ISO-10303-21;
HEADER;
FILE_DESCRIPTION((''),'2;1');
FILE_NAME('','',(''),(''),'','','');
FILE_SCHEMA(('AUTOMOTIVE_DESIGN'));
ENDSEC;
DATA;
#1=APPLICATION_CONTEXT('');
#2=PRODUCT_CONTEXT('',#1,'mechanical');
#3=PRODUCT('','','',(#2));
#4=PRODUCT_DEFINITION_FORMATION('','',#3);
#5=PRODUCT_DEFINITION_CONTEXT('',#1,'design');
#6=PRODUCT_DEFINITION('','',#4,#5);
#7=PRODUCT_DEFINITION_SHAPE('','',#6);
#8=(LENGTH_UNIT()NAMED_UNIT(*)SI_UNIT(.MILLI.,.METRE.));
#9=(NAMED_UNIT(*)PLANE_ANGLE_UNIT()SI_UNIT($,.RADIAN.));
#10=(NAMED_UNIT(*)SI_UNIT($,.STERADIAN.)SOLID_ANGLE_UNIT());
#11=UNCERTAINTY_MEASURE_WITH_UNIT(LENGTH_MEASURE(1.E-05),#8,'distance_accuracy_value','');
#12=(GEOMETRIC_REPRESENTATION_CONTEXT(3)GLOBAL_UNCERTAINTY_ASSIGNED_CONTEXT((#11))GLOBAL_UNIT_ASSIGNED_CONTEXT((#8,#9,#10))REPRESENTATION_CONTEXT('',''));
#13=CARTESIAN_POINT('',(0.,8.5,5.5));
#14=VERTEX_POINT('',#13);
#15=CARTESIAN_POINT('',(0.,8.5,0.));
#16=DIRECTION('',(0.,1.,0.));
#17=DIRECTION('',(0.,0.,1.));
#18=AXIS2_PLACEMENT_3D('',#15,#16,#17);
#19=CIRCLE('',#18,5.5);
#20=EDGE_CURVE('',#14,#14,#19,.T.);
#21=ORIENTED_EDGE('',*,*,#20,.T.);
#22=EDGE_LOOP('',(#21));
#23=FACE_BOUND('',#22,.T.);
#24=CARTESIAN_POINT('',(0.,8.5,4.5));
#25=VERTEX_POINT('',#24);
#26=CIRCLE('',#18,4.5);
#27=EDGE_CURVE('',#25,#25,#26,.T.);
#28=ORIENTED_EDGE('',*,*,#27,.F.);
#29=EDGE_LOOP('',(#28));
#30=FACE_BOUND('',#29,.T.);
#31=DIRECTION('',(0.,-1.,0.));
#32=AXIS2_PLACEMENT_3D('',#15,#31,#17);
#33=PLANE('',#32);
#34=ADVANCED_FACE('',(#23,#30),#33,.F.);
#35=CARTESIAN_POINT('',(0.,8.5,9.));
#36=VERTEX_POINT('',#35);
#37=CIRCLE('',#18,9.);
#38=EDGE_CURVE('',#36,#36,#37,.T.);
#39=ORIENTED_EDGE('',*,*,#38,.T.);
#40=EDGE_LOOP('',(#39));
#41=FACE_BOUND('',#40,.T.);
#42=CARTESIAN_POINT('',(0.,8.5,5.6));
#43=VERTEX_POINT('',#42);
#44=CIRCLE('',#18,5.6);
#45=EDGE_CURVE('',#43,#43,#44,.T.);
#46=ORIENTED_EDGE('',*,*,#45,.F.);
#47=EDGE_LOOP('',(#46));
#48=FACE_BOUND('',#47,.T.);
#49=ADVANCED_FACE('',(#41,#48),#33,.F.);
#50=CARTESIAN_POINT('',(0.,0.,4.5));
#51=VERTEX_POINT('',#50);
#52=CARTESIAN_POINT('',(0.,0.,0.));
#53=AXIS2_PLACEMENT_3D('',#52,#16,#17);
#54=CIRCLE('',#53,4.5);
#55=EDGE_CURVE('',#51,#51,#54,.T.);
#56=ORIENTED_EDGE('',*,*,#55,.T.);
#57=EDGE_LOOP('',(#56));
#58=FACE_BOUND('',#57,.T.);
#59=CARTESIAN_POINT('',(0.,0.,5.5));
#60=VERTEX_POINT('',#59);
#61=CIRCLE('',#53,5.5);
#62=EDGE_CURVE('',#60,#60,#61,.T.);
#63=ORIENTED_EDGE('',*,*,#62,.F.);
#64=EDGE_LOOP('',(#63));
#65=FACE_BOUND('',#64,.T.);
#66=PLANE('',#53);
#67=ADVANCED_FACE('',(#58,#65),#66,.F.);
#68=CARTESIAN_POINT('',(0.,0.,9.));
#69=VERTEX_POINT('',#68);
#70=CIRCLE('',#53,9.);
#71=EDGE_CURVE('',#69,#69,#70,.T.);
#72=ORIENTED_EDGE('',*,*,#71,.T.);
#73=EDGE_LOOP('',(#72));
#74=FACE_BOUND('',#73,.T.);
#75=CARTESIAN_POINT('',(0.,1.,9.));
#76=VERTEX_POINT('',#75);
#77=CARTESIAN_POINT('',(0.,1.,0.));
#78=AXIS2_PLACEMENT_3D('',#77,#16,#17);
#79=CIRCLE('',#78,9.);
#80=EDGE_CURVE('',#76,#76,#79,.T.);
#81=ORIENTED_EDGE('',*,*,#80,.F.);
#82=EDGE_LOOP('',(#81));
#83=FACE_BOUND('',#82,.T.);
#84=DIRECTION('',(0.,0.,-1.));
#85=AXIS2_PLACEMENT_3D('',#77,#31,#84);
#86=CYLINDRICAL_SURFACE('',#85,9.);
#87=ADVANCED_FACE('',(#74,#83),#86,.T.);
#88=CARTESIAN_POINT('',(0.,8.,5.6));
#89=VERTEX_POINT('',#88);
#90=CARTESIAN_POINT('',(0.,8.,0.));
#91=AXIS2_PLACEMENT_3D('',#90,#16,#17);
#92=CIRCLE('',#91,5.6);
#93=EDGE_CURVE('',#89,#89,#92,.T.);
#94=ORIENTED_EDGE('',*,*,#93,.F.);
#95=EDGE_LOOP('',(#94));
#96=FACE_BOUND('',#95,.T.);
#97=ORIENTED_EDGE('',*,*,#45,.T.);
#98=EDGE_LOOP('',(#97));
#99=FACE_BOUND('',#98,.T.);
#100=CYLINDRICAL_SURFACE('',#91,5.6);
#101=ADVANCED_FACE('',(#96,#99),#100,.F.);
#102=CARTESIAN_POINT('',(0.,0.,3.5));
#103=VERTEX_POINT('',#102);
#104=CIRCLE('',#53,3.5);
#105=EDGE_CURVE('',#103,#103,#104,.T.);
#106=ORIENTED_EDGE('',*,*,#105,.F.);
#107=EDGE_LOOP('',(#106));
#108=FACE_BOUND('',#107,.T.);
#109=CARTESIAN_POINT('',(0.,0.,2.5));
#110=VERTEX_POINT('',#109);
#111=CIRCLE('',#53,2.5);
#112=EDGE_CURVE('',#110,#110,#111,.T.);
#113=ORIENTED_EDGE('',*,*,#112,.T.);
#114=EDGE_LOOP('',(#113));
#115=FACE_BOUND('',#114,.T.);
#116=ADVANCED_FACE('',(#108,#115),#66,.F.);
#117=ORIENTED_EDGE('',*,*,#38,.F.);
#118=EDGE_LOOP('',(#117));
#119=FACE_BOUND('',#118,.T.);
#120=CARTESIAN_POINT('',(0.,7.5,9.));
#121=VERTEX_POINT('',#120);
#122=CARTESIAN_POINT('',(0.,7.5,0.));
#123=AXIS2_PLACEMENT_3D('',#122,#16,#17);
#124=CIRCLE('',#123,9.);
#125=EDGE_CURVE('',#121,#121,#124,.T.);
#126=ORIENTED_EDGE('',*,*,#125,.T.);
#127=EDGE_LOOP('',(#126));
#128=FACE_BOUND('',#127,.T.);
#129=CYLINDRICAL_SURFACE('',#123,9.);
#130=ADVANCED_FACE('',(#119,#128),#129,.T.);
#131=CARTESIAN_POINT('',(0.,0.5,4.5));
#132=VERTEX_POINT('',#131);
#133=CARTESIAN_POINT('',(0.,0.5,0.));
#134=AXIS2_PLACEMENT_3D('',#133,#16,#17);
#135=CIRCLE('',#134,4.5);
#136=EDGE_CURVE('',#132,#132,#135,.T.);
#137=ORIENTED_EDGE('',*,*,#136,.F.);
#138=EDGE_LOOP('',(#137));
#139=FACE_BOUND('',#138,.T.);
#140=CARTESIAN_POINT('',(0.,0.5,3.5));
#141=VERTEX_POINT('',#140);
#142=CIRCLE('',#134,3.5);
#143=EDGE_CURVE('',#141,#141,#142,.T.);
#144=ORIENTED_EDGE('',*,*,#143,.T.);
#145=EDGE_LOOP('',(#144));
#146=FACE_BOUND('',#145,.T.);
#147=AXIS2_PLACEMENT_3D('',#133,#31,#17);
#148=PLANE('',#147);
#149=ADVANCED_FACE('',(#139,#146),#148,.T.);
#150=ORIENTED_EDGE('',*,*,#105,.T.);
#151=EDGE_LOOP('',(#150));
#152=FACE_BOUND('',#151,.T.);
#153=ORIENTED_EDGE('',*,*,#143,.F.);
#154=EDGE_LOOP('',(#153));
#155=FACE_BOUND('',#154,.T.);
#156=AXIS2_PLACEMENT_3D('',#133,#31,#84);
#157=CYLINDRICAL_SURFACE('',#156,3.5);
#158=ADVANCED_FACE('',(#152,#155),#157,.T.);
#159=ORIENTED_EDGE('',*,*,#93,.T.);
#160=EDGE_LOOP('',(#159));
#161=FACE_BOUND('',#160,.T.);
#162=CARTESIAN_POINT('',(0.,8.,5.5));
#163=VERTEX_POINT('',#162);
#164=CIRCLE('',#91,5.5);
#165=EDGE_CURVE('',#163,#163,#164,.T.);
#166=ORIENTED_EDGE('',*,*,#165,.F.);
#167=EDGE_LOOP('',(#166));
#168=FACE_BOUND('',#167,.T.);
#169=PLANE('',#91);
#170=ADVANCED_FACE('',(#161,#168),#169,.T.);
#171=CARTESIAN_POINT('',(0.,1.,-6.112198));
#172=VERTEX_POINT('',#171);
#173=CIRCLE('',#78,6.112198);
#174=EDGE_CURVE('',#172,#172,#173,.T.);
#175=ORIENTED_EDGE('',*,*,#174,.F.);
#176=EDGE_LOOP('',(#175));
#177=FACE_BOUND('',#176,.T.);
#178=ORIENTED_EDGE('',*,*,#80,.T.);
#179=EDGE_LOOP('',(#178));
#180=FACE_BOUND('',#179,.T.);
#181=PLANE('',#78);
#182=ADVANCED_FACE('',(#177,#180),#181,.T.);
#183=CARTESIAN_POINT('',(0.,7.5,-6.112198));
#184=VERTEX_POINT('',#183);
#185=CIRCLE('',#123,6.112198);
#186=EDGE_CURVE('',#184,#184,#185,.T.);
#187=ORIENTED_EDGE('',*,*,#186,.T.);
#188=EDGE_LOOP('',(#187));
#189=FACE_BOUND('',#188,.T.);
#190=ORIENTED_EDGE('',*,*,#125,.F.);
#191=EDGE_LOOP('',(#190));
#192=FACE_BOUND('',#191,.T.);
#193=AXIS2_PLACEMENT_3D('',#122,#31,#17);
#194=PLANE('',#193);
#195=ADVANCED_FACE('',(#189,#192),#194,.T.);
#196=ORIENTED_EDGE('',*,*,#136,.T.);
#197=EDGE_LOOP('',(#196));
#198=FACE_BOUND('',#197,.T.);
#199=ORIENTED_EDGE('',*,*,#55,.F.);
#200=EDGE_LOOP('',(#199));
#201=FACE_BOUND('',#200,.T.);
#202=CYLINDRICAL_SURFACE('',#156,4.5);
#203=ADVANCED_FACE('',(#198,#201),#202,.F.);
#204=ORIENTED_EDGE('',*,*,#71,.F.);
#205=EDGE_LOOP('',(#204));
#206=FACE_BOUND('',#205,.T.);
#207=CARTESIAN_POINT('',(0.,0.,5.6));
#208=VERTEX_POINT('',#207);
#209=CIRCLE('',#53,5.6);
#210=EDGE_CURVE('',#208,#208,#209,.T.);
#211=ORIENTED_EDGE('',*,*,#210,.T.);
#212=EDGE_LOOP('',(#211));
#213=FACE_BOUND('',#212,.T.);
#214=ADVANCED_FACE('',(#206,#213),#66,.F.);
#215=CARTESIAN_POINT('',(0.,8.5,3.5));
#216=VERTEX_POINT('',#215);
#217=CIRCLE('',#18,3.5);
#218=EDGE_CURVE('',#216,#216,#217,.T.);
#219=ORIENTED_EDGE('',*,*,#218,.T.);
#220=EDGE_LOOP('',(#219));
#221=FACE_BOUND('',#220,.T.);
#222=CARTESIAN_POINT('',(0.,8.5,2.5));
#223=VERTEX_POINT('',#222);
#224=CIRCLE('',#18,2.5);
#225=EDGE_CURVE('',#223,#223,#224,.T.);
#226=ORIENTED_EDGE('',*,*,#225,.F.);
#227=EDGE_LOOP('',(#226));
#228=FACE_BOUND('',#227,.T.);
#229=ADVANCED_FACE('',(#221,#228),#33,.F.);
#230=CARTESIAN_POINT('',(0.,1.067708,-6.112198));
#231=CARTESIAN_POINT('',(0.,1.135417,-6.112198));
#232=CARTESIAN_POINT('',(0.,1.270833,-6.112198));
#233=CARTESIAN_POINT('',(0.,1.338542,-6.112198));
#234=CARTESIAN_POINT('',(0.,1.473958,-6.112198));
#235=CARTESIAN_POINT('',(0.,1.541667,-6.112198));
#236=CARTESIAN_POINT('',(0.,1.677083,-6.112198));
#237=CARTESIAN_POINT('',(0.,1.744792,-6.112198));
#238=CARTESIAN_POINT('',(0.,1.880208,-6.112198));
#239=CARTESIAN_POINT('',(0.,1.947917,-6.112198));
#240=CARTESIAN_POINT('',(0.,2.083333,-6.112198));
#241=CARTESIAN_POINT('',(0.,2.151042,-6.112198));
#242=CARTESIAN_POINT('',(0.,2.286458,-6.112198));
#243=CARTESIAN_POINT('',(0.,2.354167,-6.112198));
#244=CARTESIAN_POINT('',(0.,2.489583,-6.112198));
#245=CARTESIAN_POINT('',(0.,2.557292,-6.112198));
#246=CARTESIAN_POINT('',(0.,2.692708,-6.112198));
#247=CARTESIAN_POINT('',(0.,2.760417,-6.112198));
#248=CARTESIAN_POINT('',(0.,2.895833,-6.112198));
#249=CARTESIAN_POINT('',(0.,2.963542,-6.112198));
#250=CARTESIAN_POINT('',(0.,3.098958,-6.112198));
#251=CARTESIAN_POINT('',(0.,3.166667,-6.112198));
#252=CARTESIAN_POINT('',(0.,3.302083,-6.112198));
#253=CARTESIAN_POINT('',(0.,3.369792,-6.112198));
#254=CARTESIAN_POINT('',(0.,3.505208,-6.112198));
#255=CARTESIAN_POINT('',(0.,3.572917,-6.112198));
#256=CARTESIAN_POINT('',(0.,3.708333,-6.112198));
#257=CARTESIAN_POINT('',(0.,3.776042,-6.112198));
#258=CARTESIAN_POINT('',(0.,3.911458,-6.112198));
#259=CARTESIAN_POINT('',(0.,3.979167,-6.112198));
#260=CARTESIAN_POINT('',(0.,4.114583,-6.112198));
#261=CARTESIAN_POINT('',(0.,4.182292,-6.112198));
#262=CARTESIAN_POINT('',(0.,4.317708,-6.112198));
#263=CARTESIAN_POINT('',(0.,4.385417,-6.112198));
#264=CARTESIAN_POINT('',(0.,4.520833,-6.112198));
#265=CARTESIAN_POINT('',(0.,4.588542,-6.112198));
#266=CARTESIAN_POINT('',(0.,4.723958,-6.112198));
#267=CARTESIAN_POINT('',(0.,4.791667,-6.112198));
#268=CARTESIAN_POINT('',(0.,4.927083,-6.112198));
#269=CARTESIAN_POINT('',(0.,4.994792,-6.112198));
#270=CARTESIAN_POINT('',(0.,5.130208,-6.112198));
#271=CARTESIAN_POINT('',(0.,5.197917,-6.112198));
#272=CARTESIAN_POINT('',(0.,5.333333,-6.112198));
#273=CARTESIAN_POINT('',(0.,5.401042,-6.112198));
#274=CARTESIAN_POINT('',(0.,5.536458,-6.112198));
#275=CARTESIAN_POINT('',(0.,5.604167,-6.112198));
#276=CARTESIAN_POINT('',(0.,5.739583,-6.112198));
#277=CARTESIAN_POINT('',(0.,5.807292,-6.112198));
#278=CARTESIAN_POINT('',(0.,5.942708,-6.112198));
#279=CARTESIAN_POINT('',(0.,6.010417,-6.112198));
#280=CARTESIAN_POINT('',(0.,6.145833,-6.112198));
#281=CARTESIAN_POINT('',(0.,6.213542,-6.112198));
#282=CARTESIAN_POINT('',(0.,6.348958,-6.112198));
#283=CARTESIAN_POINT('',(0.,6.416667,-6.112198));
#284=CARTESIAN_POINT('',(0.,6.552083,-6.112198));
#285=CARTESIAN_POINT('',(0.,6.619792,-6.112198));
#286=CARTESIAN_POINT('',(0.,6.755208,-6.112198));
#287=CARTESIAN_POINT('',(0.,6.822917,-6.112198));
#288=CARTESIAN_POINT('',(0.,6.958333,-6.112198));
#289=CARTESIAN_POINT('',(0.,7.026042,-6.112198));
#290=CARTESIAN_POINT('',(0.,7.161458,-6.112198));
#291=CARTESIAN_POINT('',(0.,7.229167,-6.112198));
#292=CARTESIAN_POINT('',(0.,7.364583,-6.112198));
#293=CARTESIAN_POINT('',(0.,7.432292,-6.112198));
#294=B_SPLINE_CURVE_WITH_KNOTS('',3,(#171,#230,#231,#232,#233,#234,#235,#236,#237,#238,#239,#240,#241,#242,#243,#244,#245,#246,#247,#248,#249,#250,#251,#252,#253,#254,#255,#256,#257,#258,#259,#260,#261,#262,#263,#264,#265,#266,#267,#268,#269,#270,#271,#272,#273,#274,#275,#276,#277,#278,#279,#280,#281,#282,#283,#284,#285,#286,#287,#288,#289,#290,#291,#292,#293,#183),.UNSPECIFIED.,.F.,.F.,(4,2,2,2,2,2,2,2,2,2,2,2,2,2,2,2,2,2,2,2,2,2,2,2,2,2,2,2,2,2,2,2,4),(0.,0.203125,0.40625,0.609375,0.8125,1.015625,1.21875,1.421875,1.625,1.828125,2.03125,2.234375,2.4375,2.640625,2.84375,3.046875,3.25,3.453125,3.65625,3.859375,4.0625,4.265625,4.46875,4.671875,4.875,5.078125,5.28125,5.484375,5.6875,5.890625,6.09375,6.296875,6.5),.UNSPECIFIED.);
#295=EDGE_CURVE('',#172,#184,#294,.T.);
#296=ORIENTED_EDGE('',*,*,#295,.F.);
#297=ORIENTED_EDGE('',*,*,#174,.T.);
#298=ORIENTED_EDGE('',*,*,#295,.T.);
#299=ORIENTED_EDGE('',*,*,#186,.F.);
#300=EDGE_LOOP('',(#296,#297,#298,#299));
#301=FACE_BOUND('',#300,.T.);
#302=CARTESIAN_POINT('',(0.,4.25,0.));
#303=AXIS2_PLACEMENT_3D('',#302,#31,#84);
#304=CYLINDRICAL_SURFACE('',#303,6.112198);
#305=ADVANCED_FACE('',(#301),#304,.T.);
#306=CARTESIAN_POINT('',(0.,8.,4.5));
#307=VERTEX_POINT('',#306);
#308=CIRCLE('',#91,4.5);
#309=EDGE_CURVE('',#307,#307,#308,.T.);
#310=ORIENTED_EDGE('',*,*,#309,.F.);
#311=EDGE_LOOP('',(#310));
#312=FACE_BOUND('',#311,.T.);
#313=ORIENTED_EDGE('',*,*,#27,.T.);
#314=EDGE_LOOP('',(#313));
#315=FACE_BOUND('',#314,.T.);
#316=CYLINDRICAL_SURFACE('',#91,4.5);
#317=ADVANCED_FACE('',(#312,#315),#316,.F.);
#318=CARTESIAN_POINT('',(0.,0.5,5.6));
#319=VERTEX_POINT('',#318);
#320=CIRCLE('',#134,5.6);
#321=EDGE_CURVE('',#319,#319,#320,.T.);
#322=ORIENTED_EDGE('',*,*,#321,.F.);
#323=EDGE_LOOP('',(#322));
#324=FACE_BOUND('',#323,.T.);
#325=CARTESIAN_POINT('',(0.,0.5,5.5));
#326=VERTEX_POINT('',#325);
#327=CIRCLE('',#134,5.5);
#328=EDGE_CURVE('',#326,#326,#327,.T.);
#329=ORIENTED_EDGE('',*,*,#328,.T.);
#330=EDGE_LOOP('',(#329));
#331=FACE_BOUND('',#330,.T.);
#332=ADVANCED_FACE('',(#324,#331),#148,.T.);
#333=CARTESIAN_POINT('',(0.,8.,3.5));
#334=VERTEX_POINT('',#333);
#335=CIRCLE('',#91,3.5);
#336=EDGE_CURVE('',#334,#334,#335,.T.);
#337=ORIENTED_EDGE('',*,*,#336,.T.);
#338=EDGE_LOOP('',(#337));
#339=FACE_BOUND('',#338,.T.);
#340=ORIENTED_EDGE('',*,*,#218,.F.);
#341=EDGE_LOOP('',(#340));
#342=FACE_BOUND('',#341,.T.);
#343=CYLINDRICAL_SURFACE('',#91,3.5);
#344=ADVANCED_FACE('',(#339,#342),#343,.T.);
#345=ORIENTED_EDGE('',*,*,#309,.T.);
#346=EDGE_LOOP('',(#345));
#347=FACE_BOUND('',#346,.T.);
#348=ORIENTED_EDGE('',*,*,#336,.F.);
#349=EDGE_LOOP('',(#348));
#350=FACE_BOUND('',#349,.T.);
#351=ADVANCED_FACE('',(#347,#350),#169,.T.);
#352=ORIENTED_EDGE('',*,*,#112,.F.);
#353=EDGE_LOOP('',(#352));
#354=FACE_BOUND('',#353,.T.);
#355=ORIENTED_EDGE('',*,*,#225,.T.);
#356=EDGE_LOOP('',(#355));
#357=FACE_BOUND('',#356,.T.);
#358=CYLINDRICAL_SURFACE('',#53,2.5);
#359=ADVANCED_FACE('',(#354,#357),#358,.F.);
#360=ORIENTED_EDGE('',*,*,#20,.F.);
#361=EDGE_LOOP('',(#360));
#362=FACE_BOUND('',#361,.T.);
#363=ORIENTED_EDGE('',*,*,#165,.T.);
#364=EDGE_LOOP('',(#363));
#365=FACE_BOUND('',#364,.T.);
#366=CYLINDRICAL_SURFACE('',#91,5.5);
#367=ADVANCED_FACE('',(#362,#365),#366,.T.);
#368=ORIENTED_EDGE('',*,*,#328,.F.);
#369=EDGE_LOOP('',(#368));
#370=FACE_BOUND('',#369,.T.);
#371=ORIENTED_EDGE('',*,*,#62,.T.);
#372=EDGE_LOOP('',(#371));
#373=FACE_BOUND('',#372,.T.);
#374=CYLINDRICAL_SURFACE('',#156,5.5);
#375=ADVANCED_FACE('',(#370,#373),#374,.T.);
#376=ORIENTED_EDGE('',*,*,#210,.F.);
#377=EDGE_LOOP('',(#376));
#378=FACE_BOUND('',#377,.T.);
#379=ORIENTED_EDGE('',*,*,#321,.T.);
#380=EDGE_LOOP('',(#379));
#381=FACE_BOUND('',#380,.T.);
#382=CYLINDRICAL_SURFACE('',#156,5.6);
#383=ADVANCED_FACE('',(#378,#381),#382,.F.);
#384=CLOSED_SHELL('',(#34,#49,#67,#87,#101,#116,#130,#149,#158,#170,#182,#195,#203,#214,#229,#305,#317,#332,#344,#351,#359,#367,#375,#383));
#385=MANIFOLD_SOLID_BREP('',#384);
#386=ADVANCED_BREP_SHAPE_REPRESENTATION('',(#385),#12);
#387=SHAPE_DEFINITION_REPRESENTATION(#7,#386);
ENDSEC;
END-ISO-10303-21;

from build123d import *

# Parameters (mm, degrees)
BOSS_EXTRUDE1_OUTLINE_R = 9
BOSS_EXTRUDE1_DEPTH     = 1
SKETCH2_R               = 6.1121977
BOSS_EXTRUDE2_DEPTH     = 3.25
SKETCH3_R               = 2.5
CUT_EXTRUDE1_DEPTH      = 16.305227865
SKETCH4_R               = 5.6
SKETCH4_R_2             = 5.5
SKETCH4_R_3             = 4.5
SKETCH4_R_4             = 3.5
CUT_EXTRUDE2_DEPTH      = 0.5


# Read off the part's stored shape, not the designer's step: Boss-Extrude1
with BuildPart() as part:
    # Boss-Extrude1 outline → Boss-Extrude1 (new body)
    with BuildSketch(Plane(origin=(0, 0, 0), x_dir=(1, 0, 0), z_dir=(0, 1, 0))):
        Circle(BOSS_EXTRUDE1_OUTLINE_R)
    boss_extrude1 = extrude(amount=BOSS_EXTRUDE1_DEPTH)

    # Sketch2 → Boss-Extrude2 (add)
    with BuildSketch(Plane(origin=(0, 1, 0), x_dir=(1, 0, 0), z_dir=(0, 1, 0))):
        with Locations(Location((0, 0, 0), (0, 0, 90))):
            Circle(SKETCH2_R)
    boss_extrude2 = extrude(amount=BOSS_EXTRUDE2_DEPTH)

    # Mirror1: Boss-Extrude2 across plane
    add(boss_extrude2.mirror(Plane.ZX.offset(4.25)))

    # Mirror2: Boss-Extrude1 across plane
    add(boss_extrude1.mirror(Plane.ZX.offset(4.25)))

    # Sketch3 → Cut-Extrude1 (cut, through all)
    with BuildSketch(Plane(origin=(0, 8.5, 0), x_dir=(1, 0, 0), z_dir=(0, 1, 0))):
        with Locations(Location((0, 0, 0), (0, 0, 270))):
            Circle(SKETCH3_R)
    extrude(amount=-CUT_EXTRUDE1_DEPTH, mode=Mode.SUBTRACT)

    # Sketch4 → Cut-Extrude2 (cut)
    # profile 1 of 2: a face of its own
    with BuildSketch(Plane(origin=(0, 8.5, 0), x_dir=(1, 0, 0), z_dir=(0, 1, 0))):
        with Locations(Location((0, 0, 0), (0, 0, 270))):
            Circle(SKETCH4_R)
        with Locations(Location((0, 0, 0), (0, 0, 270))):
            Circle(SKETCH4_R_2, mode=Mode.SUBTRACT)
    # profile 2 of 2: a face of its own
    with BuildSketch(Plane(origin=(0, 8.5, 0), x_dir=(1, 0, 0), z_dir=(0, 1, 0))):
        with Locations(Location((0, 0, 0), (0, 0, 270))):
            Circle(SKETCH4_R_3)
        with Locations(Location((0, 0, 0), (0, 0, 270))):
            Circle(SKETCH4_R_4, mode=Mode.SUBTRACT)
    cut_extrude2 = extrude(amount=-CUT_EXTRUDE2_DEPTH, mode=Mode.SUBTRACT)

    # Mirror3: Cut-Extrude2 across plane
    add(cut_extrude2.mirror(Plane.ZX.offset(4.25)), mode=Mode.SUBTRACT)


solid = part.part
